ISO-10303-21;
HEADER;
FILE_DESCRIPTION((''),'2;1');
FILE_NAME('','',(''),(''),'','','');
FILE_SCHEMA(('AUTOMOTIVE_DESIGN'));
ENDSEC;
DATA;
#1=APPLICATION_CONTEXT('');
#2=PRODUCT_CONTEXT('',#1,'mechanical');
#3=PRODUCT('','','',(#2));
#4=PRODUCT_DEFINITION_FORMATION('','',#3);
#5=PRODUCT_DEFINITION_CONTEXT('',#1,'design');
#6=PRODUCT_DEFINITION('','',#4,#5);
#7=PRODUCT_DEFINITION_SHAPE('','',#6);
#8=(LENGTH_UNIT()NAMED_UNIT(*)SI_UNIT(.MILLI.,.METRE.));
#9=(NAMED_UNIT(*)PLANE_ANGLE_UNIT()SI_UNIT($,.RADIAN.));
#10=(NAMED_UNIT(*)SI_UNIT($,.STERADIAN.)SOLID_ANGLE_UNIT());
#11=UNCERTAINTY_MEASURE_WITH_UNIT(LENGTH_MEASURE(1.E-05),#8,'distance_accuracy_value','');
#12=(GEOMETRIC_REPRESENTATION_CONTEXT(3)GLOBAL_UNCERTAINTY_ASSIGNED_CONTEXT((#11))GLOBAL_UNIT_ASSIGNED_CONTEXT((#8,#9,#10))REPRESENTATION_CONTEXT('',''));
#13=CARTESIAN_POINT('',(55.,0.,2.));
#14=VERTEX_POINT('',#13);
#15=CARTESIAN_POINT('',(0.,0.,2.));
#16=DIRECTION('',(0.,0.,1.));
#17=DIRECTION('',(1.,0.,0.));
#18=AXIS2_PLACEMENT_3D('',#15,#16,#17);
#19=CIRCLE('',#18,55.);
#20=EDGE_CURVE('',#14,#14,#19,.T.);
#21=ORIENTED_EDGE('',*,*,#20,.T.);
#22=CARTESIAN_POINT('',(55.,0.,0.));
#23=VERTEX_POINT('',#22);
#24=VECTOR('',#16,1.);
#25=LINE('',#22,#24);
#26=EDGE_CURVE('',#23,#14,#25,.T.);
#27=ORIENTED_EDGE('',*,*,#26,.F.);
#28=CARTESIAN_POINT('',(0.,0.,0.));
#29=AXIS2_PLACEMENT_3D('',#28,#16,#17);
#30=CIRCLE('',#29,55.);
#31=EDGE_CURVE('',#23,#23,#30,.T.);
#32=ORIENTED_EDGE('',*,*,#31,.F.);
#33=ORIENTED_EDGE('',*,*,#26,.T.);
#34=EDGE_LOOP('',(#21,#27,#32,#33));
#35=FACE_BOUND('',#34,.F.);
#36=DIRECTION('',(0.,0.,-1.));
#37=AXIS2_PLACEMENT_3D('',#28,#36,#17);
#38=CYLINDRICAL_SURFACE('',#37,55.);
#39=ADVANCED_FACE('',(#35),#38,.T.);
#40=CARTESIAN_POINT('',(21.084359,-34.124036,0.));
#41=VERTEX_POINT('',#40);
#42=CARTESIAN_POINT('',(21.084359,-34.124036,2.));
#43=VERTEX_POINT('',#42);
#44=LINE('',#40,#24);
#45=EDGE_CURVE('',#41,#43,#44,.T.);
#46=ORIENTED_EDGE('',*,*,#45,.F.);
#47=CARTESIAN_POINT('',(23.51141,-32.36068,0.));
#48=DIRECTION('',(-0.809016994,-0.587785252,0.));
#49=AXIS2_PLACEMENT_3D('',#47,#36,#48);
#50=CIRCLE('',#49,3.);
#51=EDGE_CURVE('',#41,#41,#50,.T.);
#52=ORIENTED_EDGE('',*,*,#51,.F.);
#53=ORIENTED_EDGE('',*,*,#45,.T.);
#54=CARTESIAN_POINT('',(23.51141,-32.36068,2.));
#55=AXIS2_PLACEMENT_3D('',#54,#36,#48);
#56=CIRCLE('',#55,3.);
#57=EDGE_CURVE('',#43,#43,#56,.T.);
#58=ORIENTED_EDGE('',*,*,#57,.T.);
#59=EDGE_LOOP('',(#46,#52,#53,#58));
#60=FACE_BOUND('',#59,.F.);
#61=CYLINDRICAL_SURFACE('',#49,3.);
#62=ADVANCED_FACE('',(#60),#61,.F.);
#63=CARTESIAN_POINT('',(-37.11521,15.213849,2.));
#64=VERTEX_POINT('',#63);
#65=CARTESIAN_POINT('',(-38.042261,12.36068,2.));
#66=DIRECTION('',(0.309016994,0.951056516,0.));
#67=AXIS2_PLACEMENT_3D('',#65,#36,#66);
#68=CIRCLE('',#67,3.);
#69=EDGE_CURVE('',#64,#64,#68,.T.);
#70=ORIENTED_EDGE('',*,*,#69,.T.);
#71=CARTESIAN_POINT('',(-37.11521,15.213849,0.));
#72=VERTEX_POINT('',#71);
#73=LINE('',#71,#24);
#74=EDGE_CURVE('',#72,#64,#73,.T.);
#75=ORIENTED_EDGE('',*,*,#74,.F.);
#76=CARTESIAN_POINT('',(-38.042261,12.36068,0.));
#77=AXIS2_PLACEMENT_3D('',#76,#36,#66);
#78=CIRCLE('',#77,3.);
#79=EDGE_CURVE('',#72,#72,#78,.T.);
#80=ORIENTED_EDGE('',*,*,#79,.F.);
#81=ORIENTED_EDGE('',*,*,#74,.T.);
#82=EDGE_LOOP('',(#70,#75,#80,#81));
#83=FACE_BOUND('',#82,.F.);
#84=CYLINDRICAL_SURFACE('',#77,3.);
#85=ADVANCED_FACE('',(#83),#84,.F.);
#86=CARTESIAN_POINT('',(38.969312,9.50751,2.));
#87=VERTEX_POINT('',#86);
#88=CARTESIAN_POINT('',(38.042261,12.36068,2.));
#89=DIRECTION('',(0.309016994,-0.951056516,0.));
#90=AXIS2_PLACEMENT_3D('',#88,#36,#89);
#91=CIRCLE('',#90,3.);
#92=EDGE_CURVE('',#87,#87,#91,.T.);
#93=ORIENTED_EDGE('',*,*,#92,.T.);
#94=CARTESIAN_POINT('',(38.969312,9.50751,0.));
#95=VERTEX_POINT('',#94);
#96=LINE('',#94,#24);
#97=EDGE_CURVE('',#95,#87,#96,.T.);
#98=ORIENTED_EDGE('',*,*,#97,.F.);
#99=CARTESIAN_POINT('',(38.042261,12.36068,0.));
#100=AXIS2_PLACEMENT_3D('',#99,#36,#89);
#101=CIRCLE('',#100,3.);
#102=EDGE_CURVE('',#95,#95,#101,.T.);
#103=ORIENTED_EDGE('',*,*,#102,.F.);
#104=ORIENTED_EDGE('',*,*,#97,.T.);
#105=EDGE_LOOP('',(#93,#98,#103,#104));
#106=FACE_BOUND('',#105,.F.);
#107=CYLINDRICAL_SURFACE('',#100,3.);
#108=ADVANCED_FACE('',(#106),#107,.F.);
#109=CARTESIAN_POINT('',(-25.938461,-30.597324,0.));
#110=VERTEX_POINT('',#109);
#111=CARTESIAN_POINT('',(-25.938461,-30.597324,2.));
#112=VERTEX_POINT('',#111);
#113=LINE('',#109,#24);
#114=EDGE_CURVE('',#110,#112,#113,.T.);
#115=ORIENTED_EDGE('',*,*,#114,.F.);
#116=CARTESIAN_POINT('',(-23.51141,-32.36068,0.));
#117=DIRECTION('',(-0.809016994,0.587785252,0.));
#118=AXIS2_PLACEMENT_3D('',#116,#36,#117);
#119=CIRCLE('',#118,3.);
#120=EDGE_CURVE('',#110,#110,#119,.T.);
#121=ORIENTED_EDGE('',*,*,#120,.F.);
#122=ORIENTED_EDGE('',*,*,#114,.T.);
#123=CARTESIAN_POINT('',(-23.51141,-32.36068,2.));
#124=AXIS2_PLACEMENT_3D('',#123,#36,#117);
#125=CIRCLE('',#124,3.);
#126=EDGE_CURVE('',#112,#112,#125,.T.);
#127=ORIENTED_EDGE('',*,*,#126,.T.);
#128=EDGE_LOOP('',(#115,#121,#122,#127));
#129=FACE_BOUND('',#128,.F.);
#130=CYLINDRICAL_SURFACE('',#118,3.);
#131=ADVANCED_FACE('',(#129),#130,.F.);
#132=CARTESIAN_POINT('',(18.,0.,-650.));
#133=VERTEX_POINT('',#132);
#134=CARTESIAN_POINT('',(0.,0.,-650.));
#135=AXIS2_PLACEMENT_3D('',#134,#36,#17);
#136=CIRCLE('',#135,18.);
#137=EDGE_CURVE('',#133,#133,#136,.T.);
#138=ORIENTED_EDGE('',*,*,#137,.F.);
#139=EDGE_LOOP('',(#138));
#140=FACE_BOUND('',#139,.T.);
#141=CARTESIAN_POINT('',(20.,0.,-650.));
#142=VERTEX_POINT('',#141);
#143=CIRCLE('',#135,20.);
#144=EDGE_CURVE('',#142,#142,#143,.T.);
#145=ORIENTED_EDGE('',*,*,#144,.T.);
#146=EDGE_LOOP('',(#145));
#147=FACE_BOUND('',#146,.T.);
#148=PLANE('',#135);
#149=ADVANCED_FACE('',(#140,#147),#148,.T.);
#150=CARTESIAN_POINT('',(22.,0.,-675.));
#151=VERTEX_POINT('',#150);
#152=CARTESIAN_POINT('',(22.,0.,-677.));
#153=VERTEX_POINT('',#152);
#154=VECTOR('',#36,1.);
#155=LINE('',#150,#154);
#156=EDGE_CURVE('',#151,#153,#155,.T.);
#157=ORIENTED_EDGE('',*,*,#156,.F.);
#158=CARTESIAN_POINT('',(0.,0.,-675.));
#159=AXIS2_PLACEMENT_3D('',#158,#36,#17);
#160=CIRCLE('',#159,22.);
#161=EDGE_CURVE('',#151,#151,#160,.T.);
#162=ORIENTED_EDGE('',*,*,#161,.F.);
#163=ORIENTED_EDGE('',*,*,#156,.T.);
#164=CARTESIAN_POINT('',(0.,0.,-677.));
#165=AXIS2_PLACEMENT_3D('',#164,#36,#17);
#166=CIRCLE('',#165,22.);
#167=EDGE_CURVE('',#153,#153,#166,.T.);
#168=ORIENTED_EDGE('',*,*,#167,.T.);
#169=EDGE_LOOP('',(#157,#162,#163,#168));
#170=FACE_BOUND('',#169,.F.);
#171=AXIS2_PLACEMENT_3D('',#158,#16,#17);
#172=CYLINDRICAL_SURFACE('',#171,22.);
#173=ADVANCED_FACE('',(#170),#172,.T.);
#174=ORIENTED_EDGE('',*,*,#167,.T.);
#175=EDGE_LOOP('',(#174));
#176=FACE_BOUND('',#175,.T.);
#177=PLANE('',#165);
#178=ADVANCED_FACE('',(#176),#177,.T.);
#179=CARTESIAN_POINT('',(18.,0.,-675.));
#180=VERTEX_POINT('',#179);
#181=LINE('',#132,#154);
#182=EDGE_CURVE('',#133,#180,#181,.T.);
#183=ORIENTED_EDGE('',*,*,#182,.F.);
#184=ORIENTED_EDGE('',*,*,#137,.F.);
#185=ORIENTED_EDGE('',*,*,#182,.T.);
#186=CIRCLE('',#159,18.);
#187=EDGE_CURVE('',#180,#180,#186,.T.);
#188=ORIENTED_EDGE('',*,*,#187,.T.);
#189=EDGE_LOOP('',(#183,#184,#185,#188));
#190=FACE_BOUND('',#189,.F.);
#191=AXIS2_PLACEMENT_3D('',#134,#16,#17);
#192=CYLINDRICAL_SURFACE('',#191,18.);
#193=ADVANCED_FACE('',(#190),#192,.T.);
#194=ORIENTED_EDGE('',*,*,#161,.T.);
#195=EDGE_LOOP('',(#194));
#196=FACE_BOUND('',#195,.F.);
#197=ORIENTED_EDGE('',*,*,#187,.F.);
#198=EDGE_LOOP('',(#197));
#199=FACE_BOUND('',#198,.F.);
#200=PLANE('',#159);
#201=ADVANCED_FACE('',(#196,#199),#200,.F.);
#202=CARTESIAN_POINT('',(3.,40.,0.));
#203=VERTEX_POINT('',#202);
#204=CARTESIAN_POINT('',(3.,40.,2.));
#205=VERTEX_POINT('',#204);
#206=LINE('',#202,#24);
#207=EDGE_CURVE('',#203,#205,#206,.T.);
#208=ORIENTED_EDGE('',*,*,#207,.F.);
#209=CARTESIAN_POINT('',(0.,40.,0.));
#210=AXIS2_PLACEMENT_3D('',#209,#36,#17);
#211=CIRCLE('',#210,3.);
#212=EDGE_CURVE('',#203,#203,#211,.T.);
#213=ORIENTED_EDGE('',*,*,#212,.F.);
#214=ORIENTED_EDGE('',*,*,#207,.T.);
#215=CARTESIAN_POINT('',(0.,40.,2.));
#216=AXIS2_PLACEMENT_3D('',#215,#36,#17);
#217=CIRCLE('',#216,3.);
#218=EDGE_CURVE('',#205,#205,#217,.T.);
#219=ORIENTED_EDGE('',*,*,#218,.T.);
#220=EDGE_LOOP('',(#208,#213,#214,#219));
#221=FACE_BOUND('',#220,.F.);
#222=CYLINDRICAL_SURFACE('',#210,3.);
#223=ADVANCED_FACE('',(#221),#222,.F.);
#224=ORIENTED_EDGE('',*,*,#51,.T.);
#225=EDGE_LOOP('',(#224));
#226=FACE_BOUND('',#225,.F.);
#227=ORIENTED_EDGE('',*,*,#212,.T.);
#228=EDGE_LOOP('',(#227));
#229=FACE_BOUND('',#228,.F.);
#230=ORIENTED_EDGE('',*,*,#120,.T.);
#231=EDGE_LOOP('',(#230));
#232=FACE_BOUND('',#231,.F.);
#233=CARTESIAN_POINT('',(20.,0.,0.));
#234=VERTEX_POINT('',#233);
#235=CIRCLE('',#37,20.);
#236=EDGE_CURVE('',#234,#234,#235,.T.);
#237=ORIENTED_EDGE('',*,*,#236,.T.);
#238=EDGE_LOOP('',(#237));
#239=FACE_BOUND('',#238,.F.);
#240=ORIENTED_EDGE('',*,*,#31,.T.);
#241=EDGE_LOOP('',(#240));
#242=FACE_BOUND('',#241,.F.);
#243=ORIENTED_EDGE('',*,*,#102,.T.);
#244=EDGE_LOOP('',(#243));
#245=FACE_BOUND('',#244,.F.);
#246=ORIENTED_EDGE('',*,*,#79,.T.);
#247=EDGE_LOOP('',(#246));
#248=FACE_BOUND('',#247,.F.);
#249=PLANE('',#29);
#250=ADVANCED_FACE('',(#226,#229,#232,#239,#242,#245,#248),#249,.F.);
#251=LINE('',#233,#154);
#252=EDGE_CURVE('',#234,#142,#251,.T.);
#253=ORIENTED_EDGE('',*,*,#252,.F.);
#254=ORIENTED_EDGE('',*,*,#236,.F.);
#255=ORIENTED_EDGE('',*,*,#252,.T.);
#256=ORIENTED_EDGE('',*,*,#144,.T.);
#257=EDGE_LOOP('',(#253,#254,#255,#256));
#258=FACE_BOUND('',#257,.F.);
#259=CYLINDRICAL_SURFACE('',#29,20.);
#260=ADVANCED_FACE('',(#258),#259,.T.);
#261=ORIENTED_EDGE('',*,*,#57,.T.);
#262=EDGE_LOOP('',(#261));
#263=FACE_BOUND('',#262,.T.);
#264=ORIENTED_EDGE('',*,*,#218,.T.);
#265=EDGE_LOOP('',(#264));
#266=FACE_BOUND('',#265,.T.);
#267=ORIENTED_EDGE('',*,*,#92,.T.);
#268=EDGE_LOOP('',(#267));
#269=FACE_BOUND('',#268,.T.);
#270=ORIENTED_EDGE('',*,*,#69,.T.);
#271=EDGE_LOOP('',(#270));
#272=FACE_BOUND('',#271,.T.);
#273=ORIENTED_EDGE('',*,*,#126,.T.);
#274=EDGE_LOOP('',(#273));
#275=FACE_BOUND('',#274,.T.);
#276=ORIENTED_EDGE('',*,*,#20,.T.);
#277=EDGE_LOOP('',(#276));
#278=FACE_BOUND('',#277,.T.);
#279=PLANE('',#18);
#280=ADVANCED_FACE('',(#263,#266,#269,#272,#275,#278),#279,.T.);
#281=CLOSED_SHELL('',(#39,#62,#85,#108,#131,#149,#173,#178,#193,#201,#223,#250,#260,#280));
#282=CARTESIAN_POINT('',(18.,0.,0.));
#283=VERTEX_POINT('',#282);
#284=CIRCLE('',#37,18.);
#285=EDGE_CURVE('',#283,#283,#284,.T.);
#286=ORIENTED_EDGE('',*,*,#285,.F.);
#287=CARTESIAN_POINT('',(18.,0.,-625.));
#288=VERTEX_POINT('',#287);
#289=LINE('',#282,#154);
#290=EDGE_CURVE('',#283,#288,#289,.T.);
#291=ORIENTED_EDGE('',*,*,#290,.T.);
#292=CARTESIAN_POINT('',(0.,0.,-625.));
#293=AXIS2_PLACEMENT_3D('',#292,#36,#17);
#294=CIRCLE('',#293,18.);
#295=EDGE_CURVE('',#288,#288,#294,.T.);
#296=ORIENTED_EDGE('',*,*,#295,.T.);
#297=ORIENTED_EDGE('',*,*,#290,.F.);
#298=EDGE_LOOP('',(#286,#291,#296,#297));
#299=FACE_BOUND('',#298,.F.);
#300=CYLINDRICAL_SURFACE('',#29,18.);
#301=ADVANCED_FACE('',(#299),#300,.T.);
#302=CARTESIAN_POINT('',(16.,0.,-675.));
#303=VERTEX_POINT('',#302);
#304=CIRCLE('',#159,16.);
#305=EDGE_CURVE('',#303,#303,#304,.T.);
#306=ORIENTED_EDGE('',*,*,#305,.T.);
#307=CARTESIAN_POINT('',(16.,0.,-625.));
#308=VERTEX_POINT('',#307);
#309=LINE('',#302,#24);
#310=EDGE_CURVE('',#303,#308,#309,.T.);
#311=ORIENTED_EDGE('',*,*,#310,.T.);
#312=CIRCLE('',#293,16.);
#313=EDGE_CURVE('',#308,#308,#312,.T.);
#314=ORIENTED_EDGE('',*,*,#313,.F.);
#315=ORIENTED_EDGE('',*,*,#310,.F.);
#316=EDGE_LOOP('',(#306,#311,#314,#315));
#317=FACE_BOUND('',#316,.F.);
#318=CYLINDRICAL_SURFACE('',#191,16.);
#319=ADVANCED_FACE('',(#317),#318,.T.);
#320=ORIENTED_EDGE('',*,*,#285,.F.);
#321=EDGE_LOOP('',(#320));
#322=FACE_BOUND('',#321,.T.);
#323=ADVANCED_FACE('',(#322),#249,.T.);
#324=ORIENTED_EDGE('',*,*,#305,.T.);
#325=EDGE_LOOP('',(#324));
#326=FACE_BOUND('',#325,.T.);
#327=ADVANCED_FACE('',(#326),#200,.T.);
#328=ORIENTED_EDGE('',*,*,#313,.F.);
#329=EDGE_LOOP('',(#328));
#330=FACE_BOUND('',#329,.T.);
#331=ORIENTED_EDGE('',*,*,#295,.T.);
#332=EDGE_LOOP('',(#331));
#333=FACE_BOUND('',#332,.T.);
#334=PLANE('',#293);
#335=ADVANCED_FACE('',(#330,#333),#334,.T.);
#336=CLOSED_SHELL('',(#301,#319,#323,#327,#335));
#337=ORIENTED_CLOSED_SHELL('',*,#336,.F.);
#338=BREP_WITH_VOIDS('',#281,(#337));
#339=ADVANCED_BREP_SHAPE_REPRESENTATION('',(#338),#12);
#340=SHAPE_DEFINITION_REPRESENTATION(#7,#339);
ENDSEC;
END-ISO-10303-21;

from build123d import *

# Parameters (mm, degrees)
F0_R            = 55
F1_DEPTH        = 2
F2_R            = 20
F2_R_2          = 18
F3_DEPTH        = 650
F4_R            = 18
F4_R_2          = 16
F5_DEPTH        = 25
F5_DEPTH_BACK   = 25
F6_R            = 22
F7_DEPTH        = 2
F8_R            = 3
F9_DEPTH        = 2.001
F9_COPIES_COUNT = 5


# Not quite as in the source:
# - a pattern or mirror of a feature is missing from the dataset's text; its kind, count and spacing are read off the source's solid


with BuildPart() as f1:
    # F0 (on Top) → F1 (new body)
    with BuildSketch(Plane.XY):
        Circle(F0_R)
    extrude(amount=F1_DEPTH)

    # F2 (on face) → F3 (join)
    with BuildSketch(Plane(origin=(0, 0, 0), x_dir=(1, 0, 0), z_dir=(0, 0, -1))):
        Circle(F2_R)
        Circle(F2_R_2, mode=Mode.SUBTRACT)
    extrude(amount=F3_DEPTH)

    # F4 (on face) → F5 (join, two sides)
    with BuildSketch(Plane(origin=(0, 0, -650), x_dir=(1, 0, 0), z_dir=(0, 0, -1))) as f5_sk:
        Circle(F4_R)
        Circle(F4_R_2, mode=Mode.SUBTRACT)
    extrude(amount=F5_DEPTH)
    extrude(f5_sk.sketch, amount=-F5_DEPTH_BACK)

    # F6 (on face) → F7 (join)
    with BuildSketch(Plane(origin=(0, 0, -675), x_dir=(1, 0, 0), z_dir=(0, 0, -1))):
        Circle(F6_R)
    extrude(amount=F7_DEPTH)

    # F8 (on face) → F9 (cut, through all)
    with BuildSketch(Plane(origin=(0, 0, 0), x_dir=(1, 0, 0), z_dir=(0, 0, -1))):
        with Locations((0, -40)):
            Circle(F8_R)
    f9 = extrude(amount=-F9_DEPTH, mode=Mode.SUBTRACT)

    # F9_copies: F9 ×5 about axis
    f9_copies_axis = Axis((0, 0, 0), (0, 0, 1))
    for i in range(1, F9_COPIES_COUNT):
        add(f9.rotate(f9_copies_axis, i * 360 / F9_COPIES_COUNT), mode=Mode.SUBTRACT)


solid = f1.part
